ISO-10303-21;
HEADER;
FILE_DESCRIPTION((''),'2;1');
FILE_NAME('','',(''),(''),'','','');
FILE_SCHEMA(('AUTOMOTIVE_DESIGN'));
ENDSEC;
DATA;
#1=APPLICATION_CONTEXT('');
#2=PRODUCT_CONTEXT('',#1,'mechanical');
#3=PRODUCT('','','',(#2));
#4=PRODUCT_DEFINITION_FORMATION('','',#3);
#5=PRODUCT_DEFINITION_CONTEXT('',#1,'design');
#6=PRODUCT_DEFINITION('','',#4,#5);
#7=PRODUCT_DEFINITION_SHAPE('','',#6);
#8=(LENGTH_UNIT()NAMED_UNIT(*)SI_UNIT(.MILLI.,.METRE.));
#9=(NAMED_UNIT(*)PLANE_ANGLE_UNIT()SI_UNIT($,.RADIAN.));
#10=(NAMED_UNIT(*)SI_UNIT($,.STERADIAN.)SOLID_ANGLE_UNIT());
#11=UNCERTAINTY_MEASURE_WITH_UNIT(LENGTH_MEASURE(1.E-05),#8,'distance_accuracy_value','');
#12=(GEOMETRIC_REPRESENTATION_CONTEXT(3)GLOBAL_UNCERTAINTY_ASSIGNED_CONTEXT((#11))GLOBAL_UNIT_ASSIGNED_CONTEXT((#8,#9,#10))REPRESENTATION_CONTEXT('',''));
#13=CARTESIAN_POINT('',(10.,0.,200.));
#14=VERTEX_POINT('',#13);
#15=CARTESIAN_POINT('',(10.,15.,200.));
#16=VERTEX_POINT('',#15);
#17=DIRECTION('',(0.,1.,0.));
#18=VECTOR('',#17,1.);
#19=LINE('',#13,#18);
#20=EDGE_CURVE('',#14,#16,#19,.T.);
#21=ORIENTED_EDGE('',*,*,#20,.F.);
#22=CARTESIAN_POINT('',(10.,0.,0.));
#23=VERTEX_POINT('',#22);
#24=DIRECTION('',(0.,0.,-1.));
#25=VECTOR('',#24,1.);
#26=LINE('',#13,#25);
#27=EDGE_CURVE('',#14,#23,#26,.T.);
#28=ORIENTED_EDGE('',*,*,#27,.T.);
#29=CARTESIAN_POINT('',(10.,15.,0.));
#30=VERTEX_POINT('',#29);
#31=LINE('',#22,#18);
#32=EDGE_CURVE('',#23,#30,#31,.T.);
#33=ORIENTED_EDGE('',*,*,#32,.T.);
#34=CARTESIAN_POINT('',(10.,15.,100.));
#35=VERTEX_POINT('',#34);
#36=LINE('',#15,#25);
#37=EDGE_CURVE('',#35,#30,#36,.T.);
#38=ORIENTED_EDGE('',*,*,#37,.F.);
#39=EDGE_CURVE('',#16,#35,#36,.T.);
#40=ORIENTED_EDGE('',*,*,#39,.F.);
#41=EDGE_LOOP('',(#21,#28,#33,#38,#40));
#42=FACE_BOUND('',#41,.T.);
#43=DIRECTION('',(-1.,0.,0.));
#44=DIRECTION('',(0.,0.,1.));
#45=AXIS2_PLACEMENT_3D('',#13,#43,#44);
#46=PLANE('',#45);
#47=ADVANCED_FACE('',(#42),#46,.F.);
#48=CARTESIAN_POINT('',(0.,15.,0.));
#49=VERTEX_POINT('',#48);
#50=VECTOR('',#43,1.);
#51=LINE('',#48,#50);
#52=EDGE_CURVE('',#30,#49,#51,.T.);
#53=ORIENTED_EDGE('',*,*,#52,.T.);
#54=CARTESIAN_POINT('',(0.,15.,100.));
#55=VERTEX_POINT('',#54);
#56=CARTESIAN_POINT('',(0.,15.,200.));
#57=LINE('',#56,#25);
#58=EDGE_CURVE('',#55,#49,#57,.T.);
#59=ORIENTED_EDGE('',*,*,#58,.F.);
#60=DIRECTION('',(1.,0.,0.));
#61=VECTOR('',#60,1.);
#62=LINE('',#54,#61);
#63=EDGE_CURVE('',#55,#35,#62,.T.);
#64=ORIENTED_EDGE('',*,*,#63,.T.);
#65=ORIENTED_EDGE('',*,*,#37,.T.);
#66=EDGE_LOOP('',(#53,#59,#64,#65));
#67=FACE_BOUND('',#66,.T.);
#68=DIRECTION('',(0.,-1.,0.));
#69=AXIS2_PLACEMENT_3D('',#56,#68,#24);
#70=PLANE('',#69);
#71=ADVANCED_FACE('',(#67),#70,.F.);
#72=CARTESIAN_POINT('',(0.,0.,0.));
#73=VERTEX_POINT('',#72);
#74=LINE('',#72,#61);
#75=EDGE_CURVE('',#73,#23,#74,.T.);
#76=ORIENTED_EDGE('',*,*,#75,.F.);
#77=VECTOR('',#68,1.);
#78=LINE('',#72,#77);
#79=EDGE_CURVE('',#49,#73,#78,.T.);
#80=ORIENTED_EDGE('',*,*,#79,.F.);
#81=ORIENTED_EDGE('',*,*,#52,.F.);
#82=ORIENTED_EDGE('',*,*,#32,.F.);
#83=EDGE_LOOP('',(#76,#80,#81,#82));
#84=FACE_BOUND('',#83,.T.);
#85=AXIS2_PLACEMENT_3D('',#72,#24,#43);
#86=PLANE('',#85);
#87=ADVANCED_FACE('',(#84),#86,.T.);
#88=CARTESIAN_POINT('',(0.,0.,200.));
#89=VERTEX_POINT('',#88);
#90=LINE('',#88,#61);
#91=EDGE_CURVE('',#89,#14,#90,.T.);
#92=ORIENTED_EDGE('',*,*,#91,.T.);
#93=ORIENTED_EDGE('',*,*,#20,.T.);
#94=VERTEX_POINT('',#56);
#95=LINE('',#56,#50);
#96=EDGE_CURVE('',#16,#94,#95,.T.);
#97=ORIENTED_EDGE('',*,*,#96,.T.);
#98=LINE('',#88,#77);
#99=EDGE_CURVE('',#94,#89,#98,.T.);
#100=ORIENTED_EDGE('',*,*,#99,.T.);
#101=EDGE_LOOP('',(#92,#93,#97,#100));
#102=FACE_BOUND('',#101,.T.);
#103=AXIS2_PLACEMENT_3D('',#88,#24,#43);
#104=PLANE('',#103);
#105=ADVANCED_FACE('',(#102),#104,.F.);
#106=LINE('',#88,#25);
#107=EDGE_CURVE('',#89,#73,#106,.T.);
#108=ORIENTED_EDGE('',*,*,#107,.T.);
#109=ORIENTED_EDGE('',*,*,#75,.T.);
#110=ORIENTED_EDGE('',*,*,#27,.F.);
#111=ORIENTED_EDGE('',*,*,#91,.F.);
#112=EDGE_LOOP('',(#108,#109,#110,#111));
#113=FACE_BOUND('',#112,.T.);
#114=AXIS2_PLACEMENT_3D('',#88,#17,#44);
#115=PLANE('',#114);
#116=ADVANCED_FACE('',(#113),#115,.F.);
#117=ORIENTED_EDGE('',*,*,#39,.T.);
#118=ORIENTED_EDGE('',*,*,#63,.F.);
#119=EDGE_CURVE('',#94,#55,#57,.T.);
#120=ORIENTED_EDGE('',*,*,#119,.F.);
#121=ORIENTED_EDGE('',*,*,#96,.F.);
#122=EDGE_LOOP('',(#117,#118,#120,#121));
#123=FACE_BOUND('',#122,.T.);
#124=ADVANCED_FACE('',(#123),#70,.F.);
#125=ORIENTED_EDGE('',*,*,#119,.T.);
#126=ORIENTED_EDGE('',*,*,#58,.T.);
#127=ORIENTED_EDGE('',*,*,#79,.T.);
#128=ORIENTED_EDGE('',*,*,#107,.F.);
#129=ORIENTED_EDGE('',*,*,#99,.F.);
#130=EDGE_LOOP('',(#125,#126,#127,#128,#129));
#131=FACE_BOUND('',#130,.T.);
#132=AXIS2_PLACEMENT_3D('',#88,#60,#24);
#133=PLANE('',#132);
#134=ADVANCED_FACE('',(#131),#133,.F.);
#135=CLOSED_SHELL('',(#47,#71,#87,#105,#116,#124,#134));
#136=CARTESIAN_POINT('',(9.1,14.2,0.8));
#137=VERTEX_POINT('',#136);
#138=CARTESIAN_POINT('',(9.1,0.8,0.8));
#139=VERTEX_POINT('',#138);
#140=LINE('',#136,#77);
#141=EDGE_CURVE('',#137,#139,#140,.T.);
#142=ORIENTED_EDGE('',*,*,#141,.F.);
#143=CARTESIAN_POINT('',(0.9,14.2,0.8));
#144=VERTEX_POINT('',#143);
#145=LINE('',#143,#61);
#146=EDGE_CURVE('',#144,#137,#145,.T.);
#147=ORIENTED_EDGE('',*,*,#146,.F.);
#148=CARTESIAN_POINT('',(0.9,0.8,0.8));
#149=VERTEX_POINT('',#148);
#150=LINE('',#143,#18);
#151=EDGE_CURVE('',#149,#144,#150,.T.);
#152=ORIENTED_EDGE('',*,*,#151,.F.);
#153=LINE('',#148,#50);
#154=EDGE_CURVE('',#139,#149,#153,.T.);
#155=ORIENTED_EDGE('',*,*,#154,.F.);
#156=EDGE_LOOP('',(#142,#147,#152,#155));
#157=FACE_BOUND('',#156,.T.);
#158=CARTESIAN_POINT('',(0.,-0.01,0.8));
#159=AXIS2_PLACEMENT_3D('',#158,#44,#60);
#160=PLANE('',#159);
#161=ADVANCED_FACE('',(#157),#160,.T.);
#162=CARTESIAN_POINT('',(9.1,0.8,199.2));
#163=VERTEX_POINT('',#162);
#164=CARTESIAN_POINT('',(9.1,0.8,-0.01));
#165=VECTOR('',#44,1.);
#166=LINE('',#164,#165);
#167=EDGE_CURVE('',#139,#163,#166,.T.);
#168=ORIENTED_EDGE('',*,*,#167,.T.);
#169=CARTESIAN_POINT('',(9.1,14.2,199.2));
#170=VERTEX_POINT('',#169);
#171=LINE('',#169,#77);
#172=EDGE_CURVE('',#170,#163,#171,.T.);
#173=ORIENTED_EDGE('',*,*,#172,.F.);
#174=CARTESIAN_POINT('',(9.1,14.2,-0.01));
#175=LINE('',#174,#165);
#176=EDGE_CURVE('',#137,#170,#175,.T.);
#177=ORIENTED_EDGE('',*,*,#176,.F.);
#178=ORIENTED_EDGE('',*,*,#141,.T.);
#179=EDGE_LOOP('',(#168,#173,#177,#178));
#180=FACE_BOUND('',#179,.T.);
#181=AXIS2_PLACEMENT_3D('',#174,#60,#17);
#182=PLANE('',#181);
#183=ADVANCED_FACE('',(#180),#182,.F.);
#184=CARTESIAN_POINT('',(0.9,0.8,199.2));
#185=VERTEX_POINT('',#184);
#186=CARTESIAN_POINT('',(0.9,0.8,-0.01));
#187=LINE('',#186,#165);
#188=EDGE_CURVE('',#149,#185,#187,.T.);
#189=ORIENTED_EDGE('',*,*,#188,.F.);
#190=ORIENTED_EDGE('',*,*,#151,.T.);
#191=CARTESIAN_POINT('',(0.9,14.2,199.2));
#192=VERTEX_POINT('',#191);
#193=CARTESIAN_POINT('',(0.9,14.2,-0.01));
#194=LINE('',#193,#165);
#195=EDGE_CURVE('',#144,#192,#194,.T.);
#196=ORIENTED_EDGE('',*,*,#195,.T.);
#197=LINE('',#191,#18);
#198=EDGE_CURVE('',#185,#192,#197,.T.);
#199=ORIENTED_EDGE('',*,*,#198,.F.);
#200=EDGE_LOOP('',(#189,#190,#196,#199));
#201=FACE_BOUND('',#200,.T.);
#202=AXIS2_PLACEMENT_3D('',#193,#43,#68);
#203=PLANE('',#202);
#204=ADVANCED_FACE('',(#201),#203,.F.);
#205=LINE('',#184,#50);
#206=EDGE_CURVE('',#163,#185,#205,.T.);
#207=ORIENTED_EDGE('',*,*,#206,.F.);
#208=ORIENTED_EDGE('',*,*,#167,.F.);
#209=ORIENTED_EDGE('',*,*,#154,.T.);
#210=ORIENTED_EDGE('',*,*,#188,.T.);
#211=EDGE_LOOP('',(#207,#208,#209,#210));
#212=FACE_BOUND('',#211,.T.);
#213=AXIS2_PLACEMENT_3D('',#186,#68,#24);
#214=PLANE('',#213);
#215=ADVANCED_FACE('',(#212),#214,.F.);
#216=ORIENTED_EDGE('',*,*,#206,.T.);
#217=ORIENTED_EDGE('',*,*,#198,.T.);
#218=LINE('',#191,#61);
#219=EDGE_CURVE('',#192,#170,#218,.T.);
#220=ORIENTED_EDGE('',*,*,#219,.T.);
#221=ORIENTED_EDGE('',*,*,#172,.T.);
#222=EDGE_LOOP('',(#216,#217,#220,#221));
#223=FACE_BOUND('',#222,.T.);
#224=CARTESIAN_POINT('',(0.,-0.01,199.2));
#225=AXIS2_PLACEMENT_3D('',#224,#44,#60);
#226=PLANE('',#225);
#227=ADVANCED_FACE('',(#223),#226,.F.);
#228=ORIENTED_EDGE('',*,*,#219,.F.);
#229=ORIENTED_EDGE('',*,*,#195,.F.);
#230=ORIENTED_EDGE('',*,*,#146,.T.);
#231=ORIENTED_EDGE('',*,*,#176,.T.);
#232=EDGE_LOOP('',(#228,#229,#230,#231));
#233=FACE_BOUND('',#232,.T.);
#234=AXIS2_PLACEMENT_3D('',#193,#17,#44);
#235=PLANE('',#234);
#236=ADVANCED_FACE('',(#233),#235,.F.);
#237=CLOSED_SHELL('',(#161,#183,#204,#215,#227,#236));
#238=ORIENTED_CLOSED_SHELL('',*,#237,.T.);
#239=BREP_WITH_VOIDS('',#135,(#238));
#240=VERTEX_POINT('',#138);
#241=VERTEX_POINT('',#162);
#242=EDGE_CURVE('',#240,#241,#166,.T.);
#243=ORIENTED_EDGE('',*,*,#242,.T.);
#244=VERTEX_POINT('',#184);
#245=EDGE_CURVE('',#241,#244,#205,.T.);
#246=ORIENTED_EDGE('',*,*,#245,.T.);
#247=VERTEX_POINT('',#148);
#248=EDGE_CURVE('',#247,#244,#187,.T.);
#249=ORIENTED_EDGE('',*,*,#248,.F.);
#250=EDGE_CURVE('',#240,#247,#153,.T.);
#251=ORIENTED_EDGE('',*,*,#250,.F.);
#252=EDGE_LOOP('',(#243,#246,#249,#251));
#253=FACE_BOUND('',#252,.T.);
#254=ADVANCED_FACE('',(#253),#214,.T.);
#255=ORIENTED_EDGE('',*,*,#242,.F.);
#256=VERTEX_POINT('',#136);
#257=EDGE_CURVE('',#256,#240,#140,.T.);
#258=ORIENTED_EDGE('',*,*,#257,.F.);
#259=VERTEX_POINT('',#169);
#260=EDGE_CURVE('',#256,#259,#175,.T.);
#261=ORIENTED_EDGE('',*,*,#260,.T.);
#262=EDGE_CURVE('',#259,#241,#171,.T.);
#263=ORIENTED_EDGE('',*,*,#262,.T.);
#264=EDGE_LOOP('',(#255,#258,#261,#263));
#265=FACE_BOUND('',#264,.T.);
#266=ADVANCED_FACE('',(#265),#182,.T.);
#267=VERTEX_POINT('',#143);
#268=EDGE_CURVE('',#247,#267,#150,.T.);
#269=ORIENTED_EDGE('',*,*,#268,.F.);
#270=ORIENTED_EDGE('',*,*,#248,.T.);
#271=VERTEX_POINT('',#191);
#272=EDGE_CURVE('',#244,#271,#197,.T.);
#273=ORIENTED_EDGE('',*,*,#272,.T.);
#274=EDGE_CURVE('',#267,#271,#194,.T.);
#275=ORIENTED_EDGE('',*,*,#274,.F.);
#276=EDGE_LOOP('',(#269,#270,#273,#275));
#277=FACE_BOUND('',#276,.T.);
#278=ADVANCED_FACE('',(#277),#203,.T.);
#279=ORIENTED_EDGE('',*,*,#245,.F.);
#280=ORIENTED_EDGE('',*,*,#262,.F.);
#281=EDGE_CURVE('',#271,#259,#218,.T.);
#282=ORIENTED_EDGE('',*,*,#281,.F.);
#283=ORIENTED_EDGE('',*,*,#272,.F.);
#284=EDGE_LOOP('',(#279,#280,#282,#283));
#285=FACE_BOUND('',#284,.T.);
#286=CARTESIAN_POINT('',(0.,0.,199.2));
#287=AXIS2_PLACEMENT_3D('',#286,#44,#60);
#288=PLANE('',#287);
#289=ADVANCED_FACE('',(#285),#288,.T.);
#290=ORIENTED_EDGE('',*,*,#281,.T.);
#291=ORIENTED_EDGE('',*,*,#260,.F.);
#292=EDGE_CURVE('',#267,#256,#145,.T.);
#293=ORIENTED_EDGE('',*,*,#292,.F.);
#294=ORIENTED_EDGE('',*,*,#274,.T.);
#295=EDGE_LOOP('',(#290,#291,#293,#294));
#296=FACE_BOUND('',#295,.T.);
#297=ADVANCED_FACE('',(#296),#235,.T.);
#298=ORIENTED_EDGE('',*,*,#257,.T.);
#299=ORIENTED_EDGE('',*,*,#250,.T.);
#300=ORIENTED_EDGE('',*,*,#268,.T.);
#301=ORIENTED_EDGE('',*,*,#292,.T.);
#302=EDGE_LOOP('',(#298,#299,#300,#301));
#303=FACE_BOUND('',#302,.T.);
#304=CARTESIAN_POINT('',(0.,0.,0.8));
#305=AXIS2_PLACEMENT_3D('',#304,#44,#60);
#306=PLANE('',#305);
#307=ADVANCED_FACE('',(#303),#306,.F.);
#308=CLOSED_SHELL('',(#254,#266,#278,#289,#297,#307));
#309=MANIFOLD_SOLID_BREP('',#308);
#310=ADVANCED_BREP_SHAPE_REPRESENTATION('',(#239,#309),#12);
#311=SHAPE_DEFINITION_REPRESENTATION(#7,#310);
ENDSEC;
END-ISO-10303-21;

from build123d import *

# Parameters (mm, degrees)
SZKIC2_W                    = 10
SZKIC2_H                    = 15
DODANIE_WYCI_GNI_CIE1_DEPTH = 200
PODZIEL1_SURFACE_1_BACK     = 201.811
PODZIEL1_SURFACE_1_DEPTH    = 403.622
PODZIEL1_SURFACE_2_BACK     = 201.811
PODZIEL1_SURFACE_2_DEPTH    = 403.622
PODZIEL2_OUTLINE_W          = 8.2
PODZIEL2_OUTLINE_H          = 13.4
PODZIEL2_DEPTH              = 0.8
PODZIEL2_START              = 199.2
PODZIEL2_2_OUTLINE_W        = 8.2
PODZIEL2_2_OUTLINE_H        = 13.4
PODZIEL2_2_DEPTH            = 0.8
PODZIEL2_3_OUTLINE_W        = 8.2
PODZIEL2_3_OUTLINE_H        = 13.4
PODZIEL2_3_DEPTH            = 0.8
PODZIEL2_4_OUTLINE_W        = 8.2
PODZIEL2_4_OUTLINE_H        = 13.4
PODZIEL2_4_DEPTH            = 0.8


# Read off the part's stored shape, not the designer's step: Podziel2
with BuildPart() as part:
    # Szkic2 → Dodanie-wyciągnięcie1 (new body)
    with BuildSketch(Plane.XY):
        with Locations((5, 7.5)):
            Rectangle(SZKIC2_W, SZKIC2_H)
    extrude(amount=DODANIE_WYCI_GNI_CIE1_DEPTH)


with BuildPart() as body_2:
    # Podziel1: the piece behind the surface
    add(part.part)
    # Podziel1 surface: a surface, the sketch's curves swept straight by 403.622 mm
    with BuildLine(Plane.XY.offset(-PODZIEL1_SURFACE_1_BACK), mode=Mode.PRIVATE) as podziel1_surface_1_path:
        Line((0.9, 14.2), (9.1, 14.2))
        Line((9.1, 14.2), (9.1, 0.8))
        Line((9.1, 0.8), (0.9, 0.8))
        Line((0.9, 0.8), (0.9, 14.2))
    podziel1_surface_1 = Shell.extrude(podziel1_surface_1_path.wire(), (0 * PODZIEL1_SURFACE_1_DEPTH, 0 * PODZIEL1_SURFACE_1_DEPTH, 1 * PODZIEL1_SURFACE_1_DEPTH))
    split(bisect_by=podziel1_surface_1, keep=Keep.BOTTOM)

    # Podziel2 outline → Podziel2 (cut)
    with BuildSketch(Plane.XY):
        with Locations((5, 7.5)):
            Rectangle(PODZIEL2_OUTLINE_W, PODZIEL2_OUTLINE_H)
    extrude(amount=PODZIEL2_DEPTH, mode=Mode.SUBTRACT)

    # Podziel2 2 outline → Podziel2 2 (cut)
    with BuildSketch(Plane.XY.offset(PODZIEL2_START)):
        with Locations((5, 7.5)):
            Rectangle(PODZIEL2_2_OUTLINE_W, PODZIEL2_2_OUTLINE_H)
    extrude(amount=PODZIEL2_2_DEPTH, mode=Mode.SUBTRACT)


with BuildPart() as part_1:
    add(part.part)

    # Podziel1: split by a surface, the side it looks to stays
    # Podziel1 surface: a surface, the sketch's curves swept straight by 403.622 mm
    with BuildLine(Plane.XY.offset(-PODZIEL1_SURFACE_2_BACK), mode=Mode.PRIVATE) as podziel1_surface_2_path:
        Line((0.9, 14.2), (9.1, 14.2))
        Line((9.1, 14.2), (9.1, 0.8))
        Line((9.1, 0.8), (0.9, 0.8))
        Line((0.9, 0.8), (0.9, 14.2))
    podziel1_surface_2 = Shell.extrude(podziel1_surface_2_path.wire(), (0 * PODZIEL1_SURFACE_2_DEPTH, 0 * PODZIEL1_SURFACE_2_DEPTH, 1 * PODZIEL1_SURFACE_2_DEPTH))
    split(bisect_by=podziel1_surface_2, keep=Keep.TOP)


with BuildPart() as body_3:
    # Podziel2 3 outline → Podziel2 3 (new body)
    with BuildSketch(Plane.XY):
        with Locations((5, 7.5)):
            Rectangle(PODZIEL2_3_OUTLINE_W, PODZIEL2_3_OUTLINE_H)
    extrude(amount=PODZIEL2_3_DEPTH)


with BuildPart() as body_4:
    # Podziel2 4 outline → Podziel2 4 (new body)
    with BuildSketch(Plane.XY.offset(PODZIEL2_START)):
        with Locations((5, 7.5)):
            Rectangle(PODZIEL2_4_OUTLINE_W, PODZIEL2_4_OUTLINE_H)
    extrude(amount=PODZIEL2_4_DEPTH)


with BuildPart() as part_2:
    add(part_1.part)

    # Połącz1: union body 4, body 3
    add(body_4.part)
    add(body_3.part)


solid = Compound([body_2.part, part_2.part])
